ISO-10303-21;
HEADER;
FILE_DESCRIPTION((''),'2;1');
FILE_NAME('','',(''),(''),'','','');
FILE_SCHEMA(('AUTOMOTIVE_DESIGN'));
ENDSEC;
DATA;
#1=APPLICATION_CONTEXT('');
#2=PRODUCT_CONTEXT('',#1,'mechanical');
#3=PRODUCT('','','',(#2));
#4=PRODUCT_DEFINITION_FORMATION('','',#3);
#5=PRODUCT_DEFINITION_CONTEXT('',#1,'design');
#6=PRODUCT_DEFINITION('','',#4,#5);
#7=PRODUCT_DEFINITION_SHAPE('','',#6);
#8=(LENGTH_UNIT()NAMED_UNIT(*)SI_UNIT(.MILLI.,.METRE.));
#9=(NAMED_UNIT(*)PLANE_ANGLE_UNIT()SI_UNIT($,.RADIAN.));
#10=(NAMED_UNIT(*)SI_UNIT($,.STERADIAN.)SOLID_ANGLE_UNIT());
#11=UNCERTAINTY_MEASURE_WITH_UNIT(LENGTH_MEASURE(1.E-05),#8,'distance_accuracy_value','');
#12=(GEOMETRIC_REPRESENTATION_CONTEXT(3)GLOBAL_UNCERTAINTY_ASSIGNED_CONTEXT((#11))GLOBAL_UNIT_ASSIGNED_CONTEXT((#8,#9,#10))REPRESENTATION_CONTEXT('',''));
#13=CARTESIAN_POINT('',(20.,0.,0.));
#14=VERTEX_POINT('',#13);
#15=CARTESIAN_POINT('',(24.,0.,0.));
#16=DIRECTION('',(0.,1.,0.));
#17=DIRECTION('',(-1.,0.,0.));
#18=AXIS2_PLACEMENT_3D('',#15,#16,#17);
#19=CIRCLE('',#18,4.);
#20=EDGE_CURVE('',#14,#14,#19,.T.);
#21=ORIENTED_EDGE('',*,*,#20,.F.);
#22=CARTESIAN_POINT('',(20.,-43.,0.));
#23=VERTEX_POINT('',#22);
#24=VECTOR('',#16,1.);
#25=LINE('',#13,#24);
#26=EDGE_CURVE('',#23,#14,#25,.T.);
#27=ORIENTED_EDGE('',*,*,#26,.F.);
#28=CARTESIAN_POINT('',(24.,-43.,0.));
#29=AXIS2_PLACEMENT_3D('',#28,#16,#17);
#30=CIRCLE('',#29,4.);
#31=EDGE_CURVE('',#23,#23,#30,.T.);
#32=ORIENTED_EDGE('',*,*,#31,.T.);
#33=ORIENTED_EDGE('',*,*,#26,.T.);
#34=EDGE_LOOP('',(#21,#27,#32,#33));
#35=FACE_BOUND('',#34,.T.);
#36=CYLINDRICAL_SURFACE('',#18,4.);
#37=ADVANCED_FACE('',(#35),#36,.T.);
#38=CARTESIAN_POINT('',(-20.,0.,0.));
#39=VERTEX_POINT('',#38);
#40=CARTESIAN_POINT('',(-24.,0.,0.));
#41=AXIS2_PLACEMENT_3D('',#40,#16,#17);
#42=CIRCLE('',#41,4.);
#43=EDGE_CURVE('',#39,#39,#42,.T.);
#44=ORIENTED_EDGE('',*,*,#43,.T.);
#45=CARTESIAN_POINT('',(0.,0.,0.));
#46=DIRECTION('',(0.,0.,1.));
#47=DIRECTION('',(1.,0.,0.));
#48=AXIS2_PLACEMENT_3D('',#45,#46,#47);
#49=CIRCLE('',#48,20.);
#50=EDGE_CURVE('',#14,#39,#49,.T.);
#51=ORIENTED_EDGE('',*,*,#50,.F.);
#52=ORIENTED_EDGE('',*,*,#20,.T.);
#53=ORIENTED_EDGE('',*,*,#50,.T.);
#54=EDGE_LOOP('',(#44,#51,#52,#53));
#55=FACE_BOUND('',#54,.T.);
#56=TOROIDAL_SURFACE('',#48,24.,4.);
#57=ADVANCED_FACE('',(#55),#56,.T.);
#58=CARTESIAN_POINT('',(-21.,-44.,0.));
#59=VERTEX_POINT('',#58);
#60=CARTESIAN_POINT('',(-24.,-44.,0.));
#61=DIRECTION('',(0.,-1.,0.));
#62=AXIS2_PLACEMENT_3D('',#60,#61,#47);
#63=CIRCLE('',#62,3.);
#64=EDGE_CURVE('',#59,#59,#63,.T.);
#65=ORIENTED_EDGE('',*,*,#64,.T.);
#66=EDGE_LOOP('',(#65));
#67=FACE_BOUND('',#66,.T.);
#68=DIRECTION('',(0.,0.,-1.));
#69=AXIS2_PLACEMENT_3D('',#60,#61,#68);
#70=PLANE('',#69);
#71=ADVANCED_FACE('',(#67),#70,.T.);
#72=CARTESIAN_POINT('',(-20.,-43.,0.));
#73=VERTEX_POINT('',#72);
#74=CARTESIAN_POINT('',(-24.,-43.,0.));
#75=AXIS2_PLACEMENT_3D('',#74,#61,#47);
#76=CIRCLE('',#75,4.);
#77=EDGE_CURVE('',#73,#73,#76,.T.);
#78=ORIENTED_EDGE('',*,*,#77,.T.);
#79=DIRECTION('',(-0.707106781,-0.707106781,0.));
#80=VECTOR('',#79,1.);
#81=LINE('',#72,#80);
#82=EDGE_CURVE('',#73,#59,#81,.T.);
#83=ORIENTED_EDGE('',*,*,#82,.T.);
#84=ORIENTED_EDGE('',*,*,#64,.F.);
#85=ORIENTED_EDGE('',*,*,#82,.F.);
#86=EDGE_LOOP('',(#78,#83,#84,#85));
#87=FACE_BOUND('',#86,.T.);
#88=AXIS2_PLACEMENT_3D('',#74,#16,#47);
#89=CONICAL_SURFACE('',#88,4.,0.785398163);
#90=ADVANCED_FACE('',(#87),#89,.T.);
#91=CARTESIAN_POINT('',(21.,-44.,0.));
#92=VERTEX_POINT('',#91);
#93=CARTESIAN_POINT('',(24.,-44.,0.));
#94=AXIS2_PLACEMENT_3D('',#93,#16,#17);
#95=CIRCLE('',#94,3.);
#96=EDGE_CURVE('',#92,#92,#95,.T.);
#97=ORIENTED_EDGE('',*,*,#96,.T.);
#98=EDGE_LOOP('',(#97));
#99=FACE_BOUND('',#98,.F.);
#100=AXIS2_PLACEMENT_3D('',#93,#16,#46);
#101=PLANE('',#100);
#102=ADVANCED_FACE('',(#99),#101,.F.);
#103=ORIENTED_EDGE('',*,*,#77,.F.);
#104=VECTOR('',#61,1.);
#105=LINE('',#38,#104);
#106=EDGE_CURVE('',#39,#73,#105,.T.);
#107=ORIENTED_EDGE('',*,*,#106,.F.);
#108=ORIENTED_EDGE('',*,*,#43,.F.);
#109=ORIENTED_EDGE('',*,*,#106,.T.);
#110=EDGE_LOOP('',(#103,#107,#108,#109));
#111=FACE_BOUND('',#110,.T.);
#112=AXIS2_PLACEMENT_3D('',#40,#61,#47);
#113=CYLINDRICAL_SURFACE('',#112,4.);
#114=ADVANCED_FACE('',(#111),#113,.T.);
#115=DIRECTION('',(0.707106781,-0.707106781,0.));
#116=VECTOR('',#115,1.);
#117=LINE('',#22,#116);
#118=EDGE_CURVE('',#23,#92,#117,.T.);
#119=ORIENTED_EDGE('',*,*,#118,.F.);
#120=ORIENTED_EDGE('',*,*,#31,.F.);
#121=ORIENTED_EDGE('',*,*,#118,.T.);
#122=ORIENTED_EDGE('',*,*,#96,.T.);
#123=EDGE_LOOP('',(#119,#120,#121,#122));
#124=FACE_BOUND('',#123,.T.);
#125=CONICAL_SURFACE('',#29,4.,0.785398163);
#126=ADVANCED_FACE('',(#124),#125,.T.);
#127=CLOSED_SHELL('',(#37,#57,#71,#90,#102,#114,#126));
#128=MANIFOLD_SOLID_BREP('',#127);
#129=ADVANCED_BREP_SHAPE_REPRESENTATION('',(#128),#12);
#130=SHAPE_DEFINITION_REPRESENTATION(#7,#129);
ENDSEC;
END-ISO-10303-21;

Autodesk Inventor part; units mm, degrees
ref_plane "YZ Plane" through (0, 0, 0) normal (1, 0, 0) x (0, 1, 0)
ref_plane "XZ Plane" through (0, 0, 0) normal (0, 1, 0) x (-1, 0, 0)
sketch "Sketch1" plane through (0, 0, 0) normal (0, 0, 1) x (1, 0, 0)
  arc A0 (24, 0) -> (-24, 0) centre (0, 0) ccw
  line L0 (-24, 0) -> (-24, -44)
  line L1 (24, 0) -> (24, -44)
  dimension "d0" = 48
  dimension "d1" = 44
ref_plane "Work Plane1" through (-24, -44, 0) normal (0, -1, 0) x (1, 0, 0)
sketch "Sketch2" plane through (-24, -44, 0) normal (0, -1, 0) x (1, 0, 0)
  circle A0 centre (0, 0) radius 4
  point P0 (24, 0)
  dimension "d2" = 8
sweep "Колебание1" add profiles "Sketch2" path "Sketch1"
thread "Резьба1"
thread "Резьба2"
chamfer "Фаска1" distance 1 angle 45 2 edges at (28, -44, 0) (-28, -44, 0)
equation "\"d0\" = D + d_"
equation "\"d1\" = -d_ + H_ - 0.5 * D"
equation "\"d2\" = d_"
equation "\"d4\" = l_"
equation "\"d11\" = l_"
equation "\"D\" = 40"
equation "\"A_\" = 48"
equation "\"H_\" = 72"
equation "\"d_\" = 8"
equation "\"l_\" = 34"
properties part number "Скоба 40 ГОСТ 24137-80" material "Сталь, мягкая"
